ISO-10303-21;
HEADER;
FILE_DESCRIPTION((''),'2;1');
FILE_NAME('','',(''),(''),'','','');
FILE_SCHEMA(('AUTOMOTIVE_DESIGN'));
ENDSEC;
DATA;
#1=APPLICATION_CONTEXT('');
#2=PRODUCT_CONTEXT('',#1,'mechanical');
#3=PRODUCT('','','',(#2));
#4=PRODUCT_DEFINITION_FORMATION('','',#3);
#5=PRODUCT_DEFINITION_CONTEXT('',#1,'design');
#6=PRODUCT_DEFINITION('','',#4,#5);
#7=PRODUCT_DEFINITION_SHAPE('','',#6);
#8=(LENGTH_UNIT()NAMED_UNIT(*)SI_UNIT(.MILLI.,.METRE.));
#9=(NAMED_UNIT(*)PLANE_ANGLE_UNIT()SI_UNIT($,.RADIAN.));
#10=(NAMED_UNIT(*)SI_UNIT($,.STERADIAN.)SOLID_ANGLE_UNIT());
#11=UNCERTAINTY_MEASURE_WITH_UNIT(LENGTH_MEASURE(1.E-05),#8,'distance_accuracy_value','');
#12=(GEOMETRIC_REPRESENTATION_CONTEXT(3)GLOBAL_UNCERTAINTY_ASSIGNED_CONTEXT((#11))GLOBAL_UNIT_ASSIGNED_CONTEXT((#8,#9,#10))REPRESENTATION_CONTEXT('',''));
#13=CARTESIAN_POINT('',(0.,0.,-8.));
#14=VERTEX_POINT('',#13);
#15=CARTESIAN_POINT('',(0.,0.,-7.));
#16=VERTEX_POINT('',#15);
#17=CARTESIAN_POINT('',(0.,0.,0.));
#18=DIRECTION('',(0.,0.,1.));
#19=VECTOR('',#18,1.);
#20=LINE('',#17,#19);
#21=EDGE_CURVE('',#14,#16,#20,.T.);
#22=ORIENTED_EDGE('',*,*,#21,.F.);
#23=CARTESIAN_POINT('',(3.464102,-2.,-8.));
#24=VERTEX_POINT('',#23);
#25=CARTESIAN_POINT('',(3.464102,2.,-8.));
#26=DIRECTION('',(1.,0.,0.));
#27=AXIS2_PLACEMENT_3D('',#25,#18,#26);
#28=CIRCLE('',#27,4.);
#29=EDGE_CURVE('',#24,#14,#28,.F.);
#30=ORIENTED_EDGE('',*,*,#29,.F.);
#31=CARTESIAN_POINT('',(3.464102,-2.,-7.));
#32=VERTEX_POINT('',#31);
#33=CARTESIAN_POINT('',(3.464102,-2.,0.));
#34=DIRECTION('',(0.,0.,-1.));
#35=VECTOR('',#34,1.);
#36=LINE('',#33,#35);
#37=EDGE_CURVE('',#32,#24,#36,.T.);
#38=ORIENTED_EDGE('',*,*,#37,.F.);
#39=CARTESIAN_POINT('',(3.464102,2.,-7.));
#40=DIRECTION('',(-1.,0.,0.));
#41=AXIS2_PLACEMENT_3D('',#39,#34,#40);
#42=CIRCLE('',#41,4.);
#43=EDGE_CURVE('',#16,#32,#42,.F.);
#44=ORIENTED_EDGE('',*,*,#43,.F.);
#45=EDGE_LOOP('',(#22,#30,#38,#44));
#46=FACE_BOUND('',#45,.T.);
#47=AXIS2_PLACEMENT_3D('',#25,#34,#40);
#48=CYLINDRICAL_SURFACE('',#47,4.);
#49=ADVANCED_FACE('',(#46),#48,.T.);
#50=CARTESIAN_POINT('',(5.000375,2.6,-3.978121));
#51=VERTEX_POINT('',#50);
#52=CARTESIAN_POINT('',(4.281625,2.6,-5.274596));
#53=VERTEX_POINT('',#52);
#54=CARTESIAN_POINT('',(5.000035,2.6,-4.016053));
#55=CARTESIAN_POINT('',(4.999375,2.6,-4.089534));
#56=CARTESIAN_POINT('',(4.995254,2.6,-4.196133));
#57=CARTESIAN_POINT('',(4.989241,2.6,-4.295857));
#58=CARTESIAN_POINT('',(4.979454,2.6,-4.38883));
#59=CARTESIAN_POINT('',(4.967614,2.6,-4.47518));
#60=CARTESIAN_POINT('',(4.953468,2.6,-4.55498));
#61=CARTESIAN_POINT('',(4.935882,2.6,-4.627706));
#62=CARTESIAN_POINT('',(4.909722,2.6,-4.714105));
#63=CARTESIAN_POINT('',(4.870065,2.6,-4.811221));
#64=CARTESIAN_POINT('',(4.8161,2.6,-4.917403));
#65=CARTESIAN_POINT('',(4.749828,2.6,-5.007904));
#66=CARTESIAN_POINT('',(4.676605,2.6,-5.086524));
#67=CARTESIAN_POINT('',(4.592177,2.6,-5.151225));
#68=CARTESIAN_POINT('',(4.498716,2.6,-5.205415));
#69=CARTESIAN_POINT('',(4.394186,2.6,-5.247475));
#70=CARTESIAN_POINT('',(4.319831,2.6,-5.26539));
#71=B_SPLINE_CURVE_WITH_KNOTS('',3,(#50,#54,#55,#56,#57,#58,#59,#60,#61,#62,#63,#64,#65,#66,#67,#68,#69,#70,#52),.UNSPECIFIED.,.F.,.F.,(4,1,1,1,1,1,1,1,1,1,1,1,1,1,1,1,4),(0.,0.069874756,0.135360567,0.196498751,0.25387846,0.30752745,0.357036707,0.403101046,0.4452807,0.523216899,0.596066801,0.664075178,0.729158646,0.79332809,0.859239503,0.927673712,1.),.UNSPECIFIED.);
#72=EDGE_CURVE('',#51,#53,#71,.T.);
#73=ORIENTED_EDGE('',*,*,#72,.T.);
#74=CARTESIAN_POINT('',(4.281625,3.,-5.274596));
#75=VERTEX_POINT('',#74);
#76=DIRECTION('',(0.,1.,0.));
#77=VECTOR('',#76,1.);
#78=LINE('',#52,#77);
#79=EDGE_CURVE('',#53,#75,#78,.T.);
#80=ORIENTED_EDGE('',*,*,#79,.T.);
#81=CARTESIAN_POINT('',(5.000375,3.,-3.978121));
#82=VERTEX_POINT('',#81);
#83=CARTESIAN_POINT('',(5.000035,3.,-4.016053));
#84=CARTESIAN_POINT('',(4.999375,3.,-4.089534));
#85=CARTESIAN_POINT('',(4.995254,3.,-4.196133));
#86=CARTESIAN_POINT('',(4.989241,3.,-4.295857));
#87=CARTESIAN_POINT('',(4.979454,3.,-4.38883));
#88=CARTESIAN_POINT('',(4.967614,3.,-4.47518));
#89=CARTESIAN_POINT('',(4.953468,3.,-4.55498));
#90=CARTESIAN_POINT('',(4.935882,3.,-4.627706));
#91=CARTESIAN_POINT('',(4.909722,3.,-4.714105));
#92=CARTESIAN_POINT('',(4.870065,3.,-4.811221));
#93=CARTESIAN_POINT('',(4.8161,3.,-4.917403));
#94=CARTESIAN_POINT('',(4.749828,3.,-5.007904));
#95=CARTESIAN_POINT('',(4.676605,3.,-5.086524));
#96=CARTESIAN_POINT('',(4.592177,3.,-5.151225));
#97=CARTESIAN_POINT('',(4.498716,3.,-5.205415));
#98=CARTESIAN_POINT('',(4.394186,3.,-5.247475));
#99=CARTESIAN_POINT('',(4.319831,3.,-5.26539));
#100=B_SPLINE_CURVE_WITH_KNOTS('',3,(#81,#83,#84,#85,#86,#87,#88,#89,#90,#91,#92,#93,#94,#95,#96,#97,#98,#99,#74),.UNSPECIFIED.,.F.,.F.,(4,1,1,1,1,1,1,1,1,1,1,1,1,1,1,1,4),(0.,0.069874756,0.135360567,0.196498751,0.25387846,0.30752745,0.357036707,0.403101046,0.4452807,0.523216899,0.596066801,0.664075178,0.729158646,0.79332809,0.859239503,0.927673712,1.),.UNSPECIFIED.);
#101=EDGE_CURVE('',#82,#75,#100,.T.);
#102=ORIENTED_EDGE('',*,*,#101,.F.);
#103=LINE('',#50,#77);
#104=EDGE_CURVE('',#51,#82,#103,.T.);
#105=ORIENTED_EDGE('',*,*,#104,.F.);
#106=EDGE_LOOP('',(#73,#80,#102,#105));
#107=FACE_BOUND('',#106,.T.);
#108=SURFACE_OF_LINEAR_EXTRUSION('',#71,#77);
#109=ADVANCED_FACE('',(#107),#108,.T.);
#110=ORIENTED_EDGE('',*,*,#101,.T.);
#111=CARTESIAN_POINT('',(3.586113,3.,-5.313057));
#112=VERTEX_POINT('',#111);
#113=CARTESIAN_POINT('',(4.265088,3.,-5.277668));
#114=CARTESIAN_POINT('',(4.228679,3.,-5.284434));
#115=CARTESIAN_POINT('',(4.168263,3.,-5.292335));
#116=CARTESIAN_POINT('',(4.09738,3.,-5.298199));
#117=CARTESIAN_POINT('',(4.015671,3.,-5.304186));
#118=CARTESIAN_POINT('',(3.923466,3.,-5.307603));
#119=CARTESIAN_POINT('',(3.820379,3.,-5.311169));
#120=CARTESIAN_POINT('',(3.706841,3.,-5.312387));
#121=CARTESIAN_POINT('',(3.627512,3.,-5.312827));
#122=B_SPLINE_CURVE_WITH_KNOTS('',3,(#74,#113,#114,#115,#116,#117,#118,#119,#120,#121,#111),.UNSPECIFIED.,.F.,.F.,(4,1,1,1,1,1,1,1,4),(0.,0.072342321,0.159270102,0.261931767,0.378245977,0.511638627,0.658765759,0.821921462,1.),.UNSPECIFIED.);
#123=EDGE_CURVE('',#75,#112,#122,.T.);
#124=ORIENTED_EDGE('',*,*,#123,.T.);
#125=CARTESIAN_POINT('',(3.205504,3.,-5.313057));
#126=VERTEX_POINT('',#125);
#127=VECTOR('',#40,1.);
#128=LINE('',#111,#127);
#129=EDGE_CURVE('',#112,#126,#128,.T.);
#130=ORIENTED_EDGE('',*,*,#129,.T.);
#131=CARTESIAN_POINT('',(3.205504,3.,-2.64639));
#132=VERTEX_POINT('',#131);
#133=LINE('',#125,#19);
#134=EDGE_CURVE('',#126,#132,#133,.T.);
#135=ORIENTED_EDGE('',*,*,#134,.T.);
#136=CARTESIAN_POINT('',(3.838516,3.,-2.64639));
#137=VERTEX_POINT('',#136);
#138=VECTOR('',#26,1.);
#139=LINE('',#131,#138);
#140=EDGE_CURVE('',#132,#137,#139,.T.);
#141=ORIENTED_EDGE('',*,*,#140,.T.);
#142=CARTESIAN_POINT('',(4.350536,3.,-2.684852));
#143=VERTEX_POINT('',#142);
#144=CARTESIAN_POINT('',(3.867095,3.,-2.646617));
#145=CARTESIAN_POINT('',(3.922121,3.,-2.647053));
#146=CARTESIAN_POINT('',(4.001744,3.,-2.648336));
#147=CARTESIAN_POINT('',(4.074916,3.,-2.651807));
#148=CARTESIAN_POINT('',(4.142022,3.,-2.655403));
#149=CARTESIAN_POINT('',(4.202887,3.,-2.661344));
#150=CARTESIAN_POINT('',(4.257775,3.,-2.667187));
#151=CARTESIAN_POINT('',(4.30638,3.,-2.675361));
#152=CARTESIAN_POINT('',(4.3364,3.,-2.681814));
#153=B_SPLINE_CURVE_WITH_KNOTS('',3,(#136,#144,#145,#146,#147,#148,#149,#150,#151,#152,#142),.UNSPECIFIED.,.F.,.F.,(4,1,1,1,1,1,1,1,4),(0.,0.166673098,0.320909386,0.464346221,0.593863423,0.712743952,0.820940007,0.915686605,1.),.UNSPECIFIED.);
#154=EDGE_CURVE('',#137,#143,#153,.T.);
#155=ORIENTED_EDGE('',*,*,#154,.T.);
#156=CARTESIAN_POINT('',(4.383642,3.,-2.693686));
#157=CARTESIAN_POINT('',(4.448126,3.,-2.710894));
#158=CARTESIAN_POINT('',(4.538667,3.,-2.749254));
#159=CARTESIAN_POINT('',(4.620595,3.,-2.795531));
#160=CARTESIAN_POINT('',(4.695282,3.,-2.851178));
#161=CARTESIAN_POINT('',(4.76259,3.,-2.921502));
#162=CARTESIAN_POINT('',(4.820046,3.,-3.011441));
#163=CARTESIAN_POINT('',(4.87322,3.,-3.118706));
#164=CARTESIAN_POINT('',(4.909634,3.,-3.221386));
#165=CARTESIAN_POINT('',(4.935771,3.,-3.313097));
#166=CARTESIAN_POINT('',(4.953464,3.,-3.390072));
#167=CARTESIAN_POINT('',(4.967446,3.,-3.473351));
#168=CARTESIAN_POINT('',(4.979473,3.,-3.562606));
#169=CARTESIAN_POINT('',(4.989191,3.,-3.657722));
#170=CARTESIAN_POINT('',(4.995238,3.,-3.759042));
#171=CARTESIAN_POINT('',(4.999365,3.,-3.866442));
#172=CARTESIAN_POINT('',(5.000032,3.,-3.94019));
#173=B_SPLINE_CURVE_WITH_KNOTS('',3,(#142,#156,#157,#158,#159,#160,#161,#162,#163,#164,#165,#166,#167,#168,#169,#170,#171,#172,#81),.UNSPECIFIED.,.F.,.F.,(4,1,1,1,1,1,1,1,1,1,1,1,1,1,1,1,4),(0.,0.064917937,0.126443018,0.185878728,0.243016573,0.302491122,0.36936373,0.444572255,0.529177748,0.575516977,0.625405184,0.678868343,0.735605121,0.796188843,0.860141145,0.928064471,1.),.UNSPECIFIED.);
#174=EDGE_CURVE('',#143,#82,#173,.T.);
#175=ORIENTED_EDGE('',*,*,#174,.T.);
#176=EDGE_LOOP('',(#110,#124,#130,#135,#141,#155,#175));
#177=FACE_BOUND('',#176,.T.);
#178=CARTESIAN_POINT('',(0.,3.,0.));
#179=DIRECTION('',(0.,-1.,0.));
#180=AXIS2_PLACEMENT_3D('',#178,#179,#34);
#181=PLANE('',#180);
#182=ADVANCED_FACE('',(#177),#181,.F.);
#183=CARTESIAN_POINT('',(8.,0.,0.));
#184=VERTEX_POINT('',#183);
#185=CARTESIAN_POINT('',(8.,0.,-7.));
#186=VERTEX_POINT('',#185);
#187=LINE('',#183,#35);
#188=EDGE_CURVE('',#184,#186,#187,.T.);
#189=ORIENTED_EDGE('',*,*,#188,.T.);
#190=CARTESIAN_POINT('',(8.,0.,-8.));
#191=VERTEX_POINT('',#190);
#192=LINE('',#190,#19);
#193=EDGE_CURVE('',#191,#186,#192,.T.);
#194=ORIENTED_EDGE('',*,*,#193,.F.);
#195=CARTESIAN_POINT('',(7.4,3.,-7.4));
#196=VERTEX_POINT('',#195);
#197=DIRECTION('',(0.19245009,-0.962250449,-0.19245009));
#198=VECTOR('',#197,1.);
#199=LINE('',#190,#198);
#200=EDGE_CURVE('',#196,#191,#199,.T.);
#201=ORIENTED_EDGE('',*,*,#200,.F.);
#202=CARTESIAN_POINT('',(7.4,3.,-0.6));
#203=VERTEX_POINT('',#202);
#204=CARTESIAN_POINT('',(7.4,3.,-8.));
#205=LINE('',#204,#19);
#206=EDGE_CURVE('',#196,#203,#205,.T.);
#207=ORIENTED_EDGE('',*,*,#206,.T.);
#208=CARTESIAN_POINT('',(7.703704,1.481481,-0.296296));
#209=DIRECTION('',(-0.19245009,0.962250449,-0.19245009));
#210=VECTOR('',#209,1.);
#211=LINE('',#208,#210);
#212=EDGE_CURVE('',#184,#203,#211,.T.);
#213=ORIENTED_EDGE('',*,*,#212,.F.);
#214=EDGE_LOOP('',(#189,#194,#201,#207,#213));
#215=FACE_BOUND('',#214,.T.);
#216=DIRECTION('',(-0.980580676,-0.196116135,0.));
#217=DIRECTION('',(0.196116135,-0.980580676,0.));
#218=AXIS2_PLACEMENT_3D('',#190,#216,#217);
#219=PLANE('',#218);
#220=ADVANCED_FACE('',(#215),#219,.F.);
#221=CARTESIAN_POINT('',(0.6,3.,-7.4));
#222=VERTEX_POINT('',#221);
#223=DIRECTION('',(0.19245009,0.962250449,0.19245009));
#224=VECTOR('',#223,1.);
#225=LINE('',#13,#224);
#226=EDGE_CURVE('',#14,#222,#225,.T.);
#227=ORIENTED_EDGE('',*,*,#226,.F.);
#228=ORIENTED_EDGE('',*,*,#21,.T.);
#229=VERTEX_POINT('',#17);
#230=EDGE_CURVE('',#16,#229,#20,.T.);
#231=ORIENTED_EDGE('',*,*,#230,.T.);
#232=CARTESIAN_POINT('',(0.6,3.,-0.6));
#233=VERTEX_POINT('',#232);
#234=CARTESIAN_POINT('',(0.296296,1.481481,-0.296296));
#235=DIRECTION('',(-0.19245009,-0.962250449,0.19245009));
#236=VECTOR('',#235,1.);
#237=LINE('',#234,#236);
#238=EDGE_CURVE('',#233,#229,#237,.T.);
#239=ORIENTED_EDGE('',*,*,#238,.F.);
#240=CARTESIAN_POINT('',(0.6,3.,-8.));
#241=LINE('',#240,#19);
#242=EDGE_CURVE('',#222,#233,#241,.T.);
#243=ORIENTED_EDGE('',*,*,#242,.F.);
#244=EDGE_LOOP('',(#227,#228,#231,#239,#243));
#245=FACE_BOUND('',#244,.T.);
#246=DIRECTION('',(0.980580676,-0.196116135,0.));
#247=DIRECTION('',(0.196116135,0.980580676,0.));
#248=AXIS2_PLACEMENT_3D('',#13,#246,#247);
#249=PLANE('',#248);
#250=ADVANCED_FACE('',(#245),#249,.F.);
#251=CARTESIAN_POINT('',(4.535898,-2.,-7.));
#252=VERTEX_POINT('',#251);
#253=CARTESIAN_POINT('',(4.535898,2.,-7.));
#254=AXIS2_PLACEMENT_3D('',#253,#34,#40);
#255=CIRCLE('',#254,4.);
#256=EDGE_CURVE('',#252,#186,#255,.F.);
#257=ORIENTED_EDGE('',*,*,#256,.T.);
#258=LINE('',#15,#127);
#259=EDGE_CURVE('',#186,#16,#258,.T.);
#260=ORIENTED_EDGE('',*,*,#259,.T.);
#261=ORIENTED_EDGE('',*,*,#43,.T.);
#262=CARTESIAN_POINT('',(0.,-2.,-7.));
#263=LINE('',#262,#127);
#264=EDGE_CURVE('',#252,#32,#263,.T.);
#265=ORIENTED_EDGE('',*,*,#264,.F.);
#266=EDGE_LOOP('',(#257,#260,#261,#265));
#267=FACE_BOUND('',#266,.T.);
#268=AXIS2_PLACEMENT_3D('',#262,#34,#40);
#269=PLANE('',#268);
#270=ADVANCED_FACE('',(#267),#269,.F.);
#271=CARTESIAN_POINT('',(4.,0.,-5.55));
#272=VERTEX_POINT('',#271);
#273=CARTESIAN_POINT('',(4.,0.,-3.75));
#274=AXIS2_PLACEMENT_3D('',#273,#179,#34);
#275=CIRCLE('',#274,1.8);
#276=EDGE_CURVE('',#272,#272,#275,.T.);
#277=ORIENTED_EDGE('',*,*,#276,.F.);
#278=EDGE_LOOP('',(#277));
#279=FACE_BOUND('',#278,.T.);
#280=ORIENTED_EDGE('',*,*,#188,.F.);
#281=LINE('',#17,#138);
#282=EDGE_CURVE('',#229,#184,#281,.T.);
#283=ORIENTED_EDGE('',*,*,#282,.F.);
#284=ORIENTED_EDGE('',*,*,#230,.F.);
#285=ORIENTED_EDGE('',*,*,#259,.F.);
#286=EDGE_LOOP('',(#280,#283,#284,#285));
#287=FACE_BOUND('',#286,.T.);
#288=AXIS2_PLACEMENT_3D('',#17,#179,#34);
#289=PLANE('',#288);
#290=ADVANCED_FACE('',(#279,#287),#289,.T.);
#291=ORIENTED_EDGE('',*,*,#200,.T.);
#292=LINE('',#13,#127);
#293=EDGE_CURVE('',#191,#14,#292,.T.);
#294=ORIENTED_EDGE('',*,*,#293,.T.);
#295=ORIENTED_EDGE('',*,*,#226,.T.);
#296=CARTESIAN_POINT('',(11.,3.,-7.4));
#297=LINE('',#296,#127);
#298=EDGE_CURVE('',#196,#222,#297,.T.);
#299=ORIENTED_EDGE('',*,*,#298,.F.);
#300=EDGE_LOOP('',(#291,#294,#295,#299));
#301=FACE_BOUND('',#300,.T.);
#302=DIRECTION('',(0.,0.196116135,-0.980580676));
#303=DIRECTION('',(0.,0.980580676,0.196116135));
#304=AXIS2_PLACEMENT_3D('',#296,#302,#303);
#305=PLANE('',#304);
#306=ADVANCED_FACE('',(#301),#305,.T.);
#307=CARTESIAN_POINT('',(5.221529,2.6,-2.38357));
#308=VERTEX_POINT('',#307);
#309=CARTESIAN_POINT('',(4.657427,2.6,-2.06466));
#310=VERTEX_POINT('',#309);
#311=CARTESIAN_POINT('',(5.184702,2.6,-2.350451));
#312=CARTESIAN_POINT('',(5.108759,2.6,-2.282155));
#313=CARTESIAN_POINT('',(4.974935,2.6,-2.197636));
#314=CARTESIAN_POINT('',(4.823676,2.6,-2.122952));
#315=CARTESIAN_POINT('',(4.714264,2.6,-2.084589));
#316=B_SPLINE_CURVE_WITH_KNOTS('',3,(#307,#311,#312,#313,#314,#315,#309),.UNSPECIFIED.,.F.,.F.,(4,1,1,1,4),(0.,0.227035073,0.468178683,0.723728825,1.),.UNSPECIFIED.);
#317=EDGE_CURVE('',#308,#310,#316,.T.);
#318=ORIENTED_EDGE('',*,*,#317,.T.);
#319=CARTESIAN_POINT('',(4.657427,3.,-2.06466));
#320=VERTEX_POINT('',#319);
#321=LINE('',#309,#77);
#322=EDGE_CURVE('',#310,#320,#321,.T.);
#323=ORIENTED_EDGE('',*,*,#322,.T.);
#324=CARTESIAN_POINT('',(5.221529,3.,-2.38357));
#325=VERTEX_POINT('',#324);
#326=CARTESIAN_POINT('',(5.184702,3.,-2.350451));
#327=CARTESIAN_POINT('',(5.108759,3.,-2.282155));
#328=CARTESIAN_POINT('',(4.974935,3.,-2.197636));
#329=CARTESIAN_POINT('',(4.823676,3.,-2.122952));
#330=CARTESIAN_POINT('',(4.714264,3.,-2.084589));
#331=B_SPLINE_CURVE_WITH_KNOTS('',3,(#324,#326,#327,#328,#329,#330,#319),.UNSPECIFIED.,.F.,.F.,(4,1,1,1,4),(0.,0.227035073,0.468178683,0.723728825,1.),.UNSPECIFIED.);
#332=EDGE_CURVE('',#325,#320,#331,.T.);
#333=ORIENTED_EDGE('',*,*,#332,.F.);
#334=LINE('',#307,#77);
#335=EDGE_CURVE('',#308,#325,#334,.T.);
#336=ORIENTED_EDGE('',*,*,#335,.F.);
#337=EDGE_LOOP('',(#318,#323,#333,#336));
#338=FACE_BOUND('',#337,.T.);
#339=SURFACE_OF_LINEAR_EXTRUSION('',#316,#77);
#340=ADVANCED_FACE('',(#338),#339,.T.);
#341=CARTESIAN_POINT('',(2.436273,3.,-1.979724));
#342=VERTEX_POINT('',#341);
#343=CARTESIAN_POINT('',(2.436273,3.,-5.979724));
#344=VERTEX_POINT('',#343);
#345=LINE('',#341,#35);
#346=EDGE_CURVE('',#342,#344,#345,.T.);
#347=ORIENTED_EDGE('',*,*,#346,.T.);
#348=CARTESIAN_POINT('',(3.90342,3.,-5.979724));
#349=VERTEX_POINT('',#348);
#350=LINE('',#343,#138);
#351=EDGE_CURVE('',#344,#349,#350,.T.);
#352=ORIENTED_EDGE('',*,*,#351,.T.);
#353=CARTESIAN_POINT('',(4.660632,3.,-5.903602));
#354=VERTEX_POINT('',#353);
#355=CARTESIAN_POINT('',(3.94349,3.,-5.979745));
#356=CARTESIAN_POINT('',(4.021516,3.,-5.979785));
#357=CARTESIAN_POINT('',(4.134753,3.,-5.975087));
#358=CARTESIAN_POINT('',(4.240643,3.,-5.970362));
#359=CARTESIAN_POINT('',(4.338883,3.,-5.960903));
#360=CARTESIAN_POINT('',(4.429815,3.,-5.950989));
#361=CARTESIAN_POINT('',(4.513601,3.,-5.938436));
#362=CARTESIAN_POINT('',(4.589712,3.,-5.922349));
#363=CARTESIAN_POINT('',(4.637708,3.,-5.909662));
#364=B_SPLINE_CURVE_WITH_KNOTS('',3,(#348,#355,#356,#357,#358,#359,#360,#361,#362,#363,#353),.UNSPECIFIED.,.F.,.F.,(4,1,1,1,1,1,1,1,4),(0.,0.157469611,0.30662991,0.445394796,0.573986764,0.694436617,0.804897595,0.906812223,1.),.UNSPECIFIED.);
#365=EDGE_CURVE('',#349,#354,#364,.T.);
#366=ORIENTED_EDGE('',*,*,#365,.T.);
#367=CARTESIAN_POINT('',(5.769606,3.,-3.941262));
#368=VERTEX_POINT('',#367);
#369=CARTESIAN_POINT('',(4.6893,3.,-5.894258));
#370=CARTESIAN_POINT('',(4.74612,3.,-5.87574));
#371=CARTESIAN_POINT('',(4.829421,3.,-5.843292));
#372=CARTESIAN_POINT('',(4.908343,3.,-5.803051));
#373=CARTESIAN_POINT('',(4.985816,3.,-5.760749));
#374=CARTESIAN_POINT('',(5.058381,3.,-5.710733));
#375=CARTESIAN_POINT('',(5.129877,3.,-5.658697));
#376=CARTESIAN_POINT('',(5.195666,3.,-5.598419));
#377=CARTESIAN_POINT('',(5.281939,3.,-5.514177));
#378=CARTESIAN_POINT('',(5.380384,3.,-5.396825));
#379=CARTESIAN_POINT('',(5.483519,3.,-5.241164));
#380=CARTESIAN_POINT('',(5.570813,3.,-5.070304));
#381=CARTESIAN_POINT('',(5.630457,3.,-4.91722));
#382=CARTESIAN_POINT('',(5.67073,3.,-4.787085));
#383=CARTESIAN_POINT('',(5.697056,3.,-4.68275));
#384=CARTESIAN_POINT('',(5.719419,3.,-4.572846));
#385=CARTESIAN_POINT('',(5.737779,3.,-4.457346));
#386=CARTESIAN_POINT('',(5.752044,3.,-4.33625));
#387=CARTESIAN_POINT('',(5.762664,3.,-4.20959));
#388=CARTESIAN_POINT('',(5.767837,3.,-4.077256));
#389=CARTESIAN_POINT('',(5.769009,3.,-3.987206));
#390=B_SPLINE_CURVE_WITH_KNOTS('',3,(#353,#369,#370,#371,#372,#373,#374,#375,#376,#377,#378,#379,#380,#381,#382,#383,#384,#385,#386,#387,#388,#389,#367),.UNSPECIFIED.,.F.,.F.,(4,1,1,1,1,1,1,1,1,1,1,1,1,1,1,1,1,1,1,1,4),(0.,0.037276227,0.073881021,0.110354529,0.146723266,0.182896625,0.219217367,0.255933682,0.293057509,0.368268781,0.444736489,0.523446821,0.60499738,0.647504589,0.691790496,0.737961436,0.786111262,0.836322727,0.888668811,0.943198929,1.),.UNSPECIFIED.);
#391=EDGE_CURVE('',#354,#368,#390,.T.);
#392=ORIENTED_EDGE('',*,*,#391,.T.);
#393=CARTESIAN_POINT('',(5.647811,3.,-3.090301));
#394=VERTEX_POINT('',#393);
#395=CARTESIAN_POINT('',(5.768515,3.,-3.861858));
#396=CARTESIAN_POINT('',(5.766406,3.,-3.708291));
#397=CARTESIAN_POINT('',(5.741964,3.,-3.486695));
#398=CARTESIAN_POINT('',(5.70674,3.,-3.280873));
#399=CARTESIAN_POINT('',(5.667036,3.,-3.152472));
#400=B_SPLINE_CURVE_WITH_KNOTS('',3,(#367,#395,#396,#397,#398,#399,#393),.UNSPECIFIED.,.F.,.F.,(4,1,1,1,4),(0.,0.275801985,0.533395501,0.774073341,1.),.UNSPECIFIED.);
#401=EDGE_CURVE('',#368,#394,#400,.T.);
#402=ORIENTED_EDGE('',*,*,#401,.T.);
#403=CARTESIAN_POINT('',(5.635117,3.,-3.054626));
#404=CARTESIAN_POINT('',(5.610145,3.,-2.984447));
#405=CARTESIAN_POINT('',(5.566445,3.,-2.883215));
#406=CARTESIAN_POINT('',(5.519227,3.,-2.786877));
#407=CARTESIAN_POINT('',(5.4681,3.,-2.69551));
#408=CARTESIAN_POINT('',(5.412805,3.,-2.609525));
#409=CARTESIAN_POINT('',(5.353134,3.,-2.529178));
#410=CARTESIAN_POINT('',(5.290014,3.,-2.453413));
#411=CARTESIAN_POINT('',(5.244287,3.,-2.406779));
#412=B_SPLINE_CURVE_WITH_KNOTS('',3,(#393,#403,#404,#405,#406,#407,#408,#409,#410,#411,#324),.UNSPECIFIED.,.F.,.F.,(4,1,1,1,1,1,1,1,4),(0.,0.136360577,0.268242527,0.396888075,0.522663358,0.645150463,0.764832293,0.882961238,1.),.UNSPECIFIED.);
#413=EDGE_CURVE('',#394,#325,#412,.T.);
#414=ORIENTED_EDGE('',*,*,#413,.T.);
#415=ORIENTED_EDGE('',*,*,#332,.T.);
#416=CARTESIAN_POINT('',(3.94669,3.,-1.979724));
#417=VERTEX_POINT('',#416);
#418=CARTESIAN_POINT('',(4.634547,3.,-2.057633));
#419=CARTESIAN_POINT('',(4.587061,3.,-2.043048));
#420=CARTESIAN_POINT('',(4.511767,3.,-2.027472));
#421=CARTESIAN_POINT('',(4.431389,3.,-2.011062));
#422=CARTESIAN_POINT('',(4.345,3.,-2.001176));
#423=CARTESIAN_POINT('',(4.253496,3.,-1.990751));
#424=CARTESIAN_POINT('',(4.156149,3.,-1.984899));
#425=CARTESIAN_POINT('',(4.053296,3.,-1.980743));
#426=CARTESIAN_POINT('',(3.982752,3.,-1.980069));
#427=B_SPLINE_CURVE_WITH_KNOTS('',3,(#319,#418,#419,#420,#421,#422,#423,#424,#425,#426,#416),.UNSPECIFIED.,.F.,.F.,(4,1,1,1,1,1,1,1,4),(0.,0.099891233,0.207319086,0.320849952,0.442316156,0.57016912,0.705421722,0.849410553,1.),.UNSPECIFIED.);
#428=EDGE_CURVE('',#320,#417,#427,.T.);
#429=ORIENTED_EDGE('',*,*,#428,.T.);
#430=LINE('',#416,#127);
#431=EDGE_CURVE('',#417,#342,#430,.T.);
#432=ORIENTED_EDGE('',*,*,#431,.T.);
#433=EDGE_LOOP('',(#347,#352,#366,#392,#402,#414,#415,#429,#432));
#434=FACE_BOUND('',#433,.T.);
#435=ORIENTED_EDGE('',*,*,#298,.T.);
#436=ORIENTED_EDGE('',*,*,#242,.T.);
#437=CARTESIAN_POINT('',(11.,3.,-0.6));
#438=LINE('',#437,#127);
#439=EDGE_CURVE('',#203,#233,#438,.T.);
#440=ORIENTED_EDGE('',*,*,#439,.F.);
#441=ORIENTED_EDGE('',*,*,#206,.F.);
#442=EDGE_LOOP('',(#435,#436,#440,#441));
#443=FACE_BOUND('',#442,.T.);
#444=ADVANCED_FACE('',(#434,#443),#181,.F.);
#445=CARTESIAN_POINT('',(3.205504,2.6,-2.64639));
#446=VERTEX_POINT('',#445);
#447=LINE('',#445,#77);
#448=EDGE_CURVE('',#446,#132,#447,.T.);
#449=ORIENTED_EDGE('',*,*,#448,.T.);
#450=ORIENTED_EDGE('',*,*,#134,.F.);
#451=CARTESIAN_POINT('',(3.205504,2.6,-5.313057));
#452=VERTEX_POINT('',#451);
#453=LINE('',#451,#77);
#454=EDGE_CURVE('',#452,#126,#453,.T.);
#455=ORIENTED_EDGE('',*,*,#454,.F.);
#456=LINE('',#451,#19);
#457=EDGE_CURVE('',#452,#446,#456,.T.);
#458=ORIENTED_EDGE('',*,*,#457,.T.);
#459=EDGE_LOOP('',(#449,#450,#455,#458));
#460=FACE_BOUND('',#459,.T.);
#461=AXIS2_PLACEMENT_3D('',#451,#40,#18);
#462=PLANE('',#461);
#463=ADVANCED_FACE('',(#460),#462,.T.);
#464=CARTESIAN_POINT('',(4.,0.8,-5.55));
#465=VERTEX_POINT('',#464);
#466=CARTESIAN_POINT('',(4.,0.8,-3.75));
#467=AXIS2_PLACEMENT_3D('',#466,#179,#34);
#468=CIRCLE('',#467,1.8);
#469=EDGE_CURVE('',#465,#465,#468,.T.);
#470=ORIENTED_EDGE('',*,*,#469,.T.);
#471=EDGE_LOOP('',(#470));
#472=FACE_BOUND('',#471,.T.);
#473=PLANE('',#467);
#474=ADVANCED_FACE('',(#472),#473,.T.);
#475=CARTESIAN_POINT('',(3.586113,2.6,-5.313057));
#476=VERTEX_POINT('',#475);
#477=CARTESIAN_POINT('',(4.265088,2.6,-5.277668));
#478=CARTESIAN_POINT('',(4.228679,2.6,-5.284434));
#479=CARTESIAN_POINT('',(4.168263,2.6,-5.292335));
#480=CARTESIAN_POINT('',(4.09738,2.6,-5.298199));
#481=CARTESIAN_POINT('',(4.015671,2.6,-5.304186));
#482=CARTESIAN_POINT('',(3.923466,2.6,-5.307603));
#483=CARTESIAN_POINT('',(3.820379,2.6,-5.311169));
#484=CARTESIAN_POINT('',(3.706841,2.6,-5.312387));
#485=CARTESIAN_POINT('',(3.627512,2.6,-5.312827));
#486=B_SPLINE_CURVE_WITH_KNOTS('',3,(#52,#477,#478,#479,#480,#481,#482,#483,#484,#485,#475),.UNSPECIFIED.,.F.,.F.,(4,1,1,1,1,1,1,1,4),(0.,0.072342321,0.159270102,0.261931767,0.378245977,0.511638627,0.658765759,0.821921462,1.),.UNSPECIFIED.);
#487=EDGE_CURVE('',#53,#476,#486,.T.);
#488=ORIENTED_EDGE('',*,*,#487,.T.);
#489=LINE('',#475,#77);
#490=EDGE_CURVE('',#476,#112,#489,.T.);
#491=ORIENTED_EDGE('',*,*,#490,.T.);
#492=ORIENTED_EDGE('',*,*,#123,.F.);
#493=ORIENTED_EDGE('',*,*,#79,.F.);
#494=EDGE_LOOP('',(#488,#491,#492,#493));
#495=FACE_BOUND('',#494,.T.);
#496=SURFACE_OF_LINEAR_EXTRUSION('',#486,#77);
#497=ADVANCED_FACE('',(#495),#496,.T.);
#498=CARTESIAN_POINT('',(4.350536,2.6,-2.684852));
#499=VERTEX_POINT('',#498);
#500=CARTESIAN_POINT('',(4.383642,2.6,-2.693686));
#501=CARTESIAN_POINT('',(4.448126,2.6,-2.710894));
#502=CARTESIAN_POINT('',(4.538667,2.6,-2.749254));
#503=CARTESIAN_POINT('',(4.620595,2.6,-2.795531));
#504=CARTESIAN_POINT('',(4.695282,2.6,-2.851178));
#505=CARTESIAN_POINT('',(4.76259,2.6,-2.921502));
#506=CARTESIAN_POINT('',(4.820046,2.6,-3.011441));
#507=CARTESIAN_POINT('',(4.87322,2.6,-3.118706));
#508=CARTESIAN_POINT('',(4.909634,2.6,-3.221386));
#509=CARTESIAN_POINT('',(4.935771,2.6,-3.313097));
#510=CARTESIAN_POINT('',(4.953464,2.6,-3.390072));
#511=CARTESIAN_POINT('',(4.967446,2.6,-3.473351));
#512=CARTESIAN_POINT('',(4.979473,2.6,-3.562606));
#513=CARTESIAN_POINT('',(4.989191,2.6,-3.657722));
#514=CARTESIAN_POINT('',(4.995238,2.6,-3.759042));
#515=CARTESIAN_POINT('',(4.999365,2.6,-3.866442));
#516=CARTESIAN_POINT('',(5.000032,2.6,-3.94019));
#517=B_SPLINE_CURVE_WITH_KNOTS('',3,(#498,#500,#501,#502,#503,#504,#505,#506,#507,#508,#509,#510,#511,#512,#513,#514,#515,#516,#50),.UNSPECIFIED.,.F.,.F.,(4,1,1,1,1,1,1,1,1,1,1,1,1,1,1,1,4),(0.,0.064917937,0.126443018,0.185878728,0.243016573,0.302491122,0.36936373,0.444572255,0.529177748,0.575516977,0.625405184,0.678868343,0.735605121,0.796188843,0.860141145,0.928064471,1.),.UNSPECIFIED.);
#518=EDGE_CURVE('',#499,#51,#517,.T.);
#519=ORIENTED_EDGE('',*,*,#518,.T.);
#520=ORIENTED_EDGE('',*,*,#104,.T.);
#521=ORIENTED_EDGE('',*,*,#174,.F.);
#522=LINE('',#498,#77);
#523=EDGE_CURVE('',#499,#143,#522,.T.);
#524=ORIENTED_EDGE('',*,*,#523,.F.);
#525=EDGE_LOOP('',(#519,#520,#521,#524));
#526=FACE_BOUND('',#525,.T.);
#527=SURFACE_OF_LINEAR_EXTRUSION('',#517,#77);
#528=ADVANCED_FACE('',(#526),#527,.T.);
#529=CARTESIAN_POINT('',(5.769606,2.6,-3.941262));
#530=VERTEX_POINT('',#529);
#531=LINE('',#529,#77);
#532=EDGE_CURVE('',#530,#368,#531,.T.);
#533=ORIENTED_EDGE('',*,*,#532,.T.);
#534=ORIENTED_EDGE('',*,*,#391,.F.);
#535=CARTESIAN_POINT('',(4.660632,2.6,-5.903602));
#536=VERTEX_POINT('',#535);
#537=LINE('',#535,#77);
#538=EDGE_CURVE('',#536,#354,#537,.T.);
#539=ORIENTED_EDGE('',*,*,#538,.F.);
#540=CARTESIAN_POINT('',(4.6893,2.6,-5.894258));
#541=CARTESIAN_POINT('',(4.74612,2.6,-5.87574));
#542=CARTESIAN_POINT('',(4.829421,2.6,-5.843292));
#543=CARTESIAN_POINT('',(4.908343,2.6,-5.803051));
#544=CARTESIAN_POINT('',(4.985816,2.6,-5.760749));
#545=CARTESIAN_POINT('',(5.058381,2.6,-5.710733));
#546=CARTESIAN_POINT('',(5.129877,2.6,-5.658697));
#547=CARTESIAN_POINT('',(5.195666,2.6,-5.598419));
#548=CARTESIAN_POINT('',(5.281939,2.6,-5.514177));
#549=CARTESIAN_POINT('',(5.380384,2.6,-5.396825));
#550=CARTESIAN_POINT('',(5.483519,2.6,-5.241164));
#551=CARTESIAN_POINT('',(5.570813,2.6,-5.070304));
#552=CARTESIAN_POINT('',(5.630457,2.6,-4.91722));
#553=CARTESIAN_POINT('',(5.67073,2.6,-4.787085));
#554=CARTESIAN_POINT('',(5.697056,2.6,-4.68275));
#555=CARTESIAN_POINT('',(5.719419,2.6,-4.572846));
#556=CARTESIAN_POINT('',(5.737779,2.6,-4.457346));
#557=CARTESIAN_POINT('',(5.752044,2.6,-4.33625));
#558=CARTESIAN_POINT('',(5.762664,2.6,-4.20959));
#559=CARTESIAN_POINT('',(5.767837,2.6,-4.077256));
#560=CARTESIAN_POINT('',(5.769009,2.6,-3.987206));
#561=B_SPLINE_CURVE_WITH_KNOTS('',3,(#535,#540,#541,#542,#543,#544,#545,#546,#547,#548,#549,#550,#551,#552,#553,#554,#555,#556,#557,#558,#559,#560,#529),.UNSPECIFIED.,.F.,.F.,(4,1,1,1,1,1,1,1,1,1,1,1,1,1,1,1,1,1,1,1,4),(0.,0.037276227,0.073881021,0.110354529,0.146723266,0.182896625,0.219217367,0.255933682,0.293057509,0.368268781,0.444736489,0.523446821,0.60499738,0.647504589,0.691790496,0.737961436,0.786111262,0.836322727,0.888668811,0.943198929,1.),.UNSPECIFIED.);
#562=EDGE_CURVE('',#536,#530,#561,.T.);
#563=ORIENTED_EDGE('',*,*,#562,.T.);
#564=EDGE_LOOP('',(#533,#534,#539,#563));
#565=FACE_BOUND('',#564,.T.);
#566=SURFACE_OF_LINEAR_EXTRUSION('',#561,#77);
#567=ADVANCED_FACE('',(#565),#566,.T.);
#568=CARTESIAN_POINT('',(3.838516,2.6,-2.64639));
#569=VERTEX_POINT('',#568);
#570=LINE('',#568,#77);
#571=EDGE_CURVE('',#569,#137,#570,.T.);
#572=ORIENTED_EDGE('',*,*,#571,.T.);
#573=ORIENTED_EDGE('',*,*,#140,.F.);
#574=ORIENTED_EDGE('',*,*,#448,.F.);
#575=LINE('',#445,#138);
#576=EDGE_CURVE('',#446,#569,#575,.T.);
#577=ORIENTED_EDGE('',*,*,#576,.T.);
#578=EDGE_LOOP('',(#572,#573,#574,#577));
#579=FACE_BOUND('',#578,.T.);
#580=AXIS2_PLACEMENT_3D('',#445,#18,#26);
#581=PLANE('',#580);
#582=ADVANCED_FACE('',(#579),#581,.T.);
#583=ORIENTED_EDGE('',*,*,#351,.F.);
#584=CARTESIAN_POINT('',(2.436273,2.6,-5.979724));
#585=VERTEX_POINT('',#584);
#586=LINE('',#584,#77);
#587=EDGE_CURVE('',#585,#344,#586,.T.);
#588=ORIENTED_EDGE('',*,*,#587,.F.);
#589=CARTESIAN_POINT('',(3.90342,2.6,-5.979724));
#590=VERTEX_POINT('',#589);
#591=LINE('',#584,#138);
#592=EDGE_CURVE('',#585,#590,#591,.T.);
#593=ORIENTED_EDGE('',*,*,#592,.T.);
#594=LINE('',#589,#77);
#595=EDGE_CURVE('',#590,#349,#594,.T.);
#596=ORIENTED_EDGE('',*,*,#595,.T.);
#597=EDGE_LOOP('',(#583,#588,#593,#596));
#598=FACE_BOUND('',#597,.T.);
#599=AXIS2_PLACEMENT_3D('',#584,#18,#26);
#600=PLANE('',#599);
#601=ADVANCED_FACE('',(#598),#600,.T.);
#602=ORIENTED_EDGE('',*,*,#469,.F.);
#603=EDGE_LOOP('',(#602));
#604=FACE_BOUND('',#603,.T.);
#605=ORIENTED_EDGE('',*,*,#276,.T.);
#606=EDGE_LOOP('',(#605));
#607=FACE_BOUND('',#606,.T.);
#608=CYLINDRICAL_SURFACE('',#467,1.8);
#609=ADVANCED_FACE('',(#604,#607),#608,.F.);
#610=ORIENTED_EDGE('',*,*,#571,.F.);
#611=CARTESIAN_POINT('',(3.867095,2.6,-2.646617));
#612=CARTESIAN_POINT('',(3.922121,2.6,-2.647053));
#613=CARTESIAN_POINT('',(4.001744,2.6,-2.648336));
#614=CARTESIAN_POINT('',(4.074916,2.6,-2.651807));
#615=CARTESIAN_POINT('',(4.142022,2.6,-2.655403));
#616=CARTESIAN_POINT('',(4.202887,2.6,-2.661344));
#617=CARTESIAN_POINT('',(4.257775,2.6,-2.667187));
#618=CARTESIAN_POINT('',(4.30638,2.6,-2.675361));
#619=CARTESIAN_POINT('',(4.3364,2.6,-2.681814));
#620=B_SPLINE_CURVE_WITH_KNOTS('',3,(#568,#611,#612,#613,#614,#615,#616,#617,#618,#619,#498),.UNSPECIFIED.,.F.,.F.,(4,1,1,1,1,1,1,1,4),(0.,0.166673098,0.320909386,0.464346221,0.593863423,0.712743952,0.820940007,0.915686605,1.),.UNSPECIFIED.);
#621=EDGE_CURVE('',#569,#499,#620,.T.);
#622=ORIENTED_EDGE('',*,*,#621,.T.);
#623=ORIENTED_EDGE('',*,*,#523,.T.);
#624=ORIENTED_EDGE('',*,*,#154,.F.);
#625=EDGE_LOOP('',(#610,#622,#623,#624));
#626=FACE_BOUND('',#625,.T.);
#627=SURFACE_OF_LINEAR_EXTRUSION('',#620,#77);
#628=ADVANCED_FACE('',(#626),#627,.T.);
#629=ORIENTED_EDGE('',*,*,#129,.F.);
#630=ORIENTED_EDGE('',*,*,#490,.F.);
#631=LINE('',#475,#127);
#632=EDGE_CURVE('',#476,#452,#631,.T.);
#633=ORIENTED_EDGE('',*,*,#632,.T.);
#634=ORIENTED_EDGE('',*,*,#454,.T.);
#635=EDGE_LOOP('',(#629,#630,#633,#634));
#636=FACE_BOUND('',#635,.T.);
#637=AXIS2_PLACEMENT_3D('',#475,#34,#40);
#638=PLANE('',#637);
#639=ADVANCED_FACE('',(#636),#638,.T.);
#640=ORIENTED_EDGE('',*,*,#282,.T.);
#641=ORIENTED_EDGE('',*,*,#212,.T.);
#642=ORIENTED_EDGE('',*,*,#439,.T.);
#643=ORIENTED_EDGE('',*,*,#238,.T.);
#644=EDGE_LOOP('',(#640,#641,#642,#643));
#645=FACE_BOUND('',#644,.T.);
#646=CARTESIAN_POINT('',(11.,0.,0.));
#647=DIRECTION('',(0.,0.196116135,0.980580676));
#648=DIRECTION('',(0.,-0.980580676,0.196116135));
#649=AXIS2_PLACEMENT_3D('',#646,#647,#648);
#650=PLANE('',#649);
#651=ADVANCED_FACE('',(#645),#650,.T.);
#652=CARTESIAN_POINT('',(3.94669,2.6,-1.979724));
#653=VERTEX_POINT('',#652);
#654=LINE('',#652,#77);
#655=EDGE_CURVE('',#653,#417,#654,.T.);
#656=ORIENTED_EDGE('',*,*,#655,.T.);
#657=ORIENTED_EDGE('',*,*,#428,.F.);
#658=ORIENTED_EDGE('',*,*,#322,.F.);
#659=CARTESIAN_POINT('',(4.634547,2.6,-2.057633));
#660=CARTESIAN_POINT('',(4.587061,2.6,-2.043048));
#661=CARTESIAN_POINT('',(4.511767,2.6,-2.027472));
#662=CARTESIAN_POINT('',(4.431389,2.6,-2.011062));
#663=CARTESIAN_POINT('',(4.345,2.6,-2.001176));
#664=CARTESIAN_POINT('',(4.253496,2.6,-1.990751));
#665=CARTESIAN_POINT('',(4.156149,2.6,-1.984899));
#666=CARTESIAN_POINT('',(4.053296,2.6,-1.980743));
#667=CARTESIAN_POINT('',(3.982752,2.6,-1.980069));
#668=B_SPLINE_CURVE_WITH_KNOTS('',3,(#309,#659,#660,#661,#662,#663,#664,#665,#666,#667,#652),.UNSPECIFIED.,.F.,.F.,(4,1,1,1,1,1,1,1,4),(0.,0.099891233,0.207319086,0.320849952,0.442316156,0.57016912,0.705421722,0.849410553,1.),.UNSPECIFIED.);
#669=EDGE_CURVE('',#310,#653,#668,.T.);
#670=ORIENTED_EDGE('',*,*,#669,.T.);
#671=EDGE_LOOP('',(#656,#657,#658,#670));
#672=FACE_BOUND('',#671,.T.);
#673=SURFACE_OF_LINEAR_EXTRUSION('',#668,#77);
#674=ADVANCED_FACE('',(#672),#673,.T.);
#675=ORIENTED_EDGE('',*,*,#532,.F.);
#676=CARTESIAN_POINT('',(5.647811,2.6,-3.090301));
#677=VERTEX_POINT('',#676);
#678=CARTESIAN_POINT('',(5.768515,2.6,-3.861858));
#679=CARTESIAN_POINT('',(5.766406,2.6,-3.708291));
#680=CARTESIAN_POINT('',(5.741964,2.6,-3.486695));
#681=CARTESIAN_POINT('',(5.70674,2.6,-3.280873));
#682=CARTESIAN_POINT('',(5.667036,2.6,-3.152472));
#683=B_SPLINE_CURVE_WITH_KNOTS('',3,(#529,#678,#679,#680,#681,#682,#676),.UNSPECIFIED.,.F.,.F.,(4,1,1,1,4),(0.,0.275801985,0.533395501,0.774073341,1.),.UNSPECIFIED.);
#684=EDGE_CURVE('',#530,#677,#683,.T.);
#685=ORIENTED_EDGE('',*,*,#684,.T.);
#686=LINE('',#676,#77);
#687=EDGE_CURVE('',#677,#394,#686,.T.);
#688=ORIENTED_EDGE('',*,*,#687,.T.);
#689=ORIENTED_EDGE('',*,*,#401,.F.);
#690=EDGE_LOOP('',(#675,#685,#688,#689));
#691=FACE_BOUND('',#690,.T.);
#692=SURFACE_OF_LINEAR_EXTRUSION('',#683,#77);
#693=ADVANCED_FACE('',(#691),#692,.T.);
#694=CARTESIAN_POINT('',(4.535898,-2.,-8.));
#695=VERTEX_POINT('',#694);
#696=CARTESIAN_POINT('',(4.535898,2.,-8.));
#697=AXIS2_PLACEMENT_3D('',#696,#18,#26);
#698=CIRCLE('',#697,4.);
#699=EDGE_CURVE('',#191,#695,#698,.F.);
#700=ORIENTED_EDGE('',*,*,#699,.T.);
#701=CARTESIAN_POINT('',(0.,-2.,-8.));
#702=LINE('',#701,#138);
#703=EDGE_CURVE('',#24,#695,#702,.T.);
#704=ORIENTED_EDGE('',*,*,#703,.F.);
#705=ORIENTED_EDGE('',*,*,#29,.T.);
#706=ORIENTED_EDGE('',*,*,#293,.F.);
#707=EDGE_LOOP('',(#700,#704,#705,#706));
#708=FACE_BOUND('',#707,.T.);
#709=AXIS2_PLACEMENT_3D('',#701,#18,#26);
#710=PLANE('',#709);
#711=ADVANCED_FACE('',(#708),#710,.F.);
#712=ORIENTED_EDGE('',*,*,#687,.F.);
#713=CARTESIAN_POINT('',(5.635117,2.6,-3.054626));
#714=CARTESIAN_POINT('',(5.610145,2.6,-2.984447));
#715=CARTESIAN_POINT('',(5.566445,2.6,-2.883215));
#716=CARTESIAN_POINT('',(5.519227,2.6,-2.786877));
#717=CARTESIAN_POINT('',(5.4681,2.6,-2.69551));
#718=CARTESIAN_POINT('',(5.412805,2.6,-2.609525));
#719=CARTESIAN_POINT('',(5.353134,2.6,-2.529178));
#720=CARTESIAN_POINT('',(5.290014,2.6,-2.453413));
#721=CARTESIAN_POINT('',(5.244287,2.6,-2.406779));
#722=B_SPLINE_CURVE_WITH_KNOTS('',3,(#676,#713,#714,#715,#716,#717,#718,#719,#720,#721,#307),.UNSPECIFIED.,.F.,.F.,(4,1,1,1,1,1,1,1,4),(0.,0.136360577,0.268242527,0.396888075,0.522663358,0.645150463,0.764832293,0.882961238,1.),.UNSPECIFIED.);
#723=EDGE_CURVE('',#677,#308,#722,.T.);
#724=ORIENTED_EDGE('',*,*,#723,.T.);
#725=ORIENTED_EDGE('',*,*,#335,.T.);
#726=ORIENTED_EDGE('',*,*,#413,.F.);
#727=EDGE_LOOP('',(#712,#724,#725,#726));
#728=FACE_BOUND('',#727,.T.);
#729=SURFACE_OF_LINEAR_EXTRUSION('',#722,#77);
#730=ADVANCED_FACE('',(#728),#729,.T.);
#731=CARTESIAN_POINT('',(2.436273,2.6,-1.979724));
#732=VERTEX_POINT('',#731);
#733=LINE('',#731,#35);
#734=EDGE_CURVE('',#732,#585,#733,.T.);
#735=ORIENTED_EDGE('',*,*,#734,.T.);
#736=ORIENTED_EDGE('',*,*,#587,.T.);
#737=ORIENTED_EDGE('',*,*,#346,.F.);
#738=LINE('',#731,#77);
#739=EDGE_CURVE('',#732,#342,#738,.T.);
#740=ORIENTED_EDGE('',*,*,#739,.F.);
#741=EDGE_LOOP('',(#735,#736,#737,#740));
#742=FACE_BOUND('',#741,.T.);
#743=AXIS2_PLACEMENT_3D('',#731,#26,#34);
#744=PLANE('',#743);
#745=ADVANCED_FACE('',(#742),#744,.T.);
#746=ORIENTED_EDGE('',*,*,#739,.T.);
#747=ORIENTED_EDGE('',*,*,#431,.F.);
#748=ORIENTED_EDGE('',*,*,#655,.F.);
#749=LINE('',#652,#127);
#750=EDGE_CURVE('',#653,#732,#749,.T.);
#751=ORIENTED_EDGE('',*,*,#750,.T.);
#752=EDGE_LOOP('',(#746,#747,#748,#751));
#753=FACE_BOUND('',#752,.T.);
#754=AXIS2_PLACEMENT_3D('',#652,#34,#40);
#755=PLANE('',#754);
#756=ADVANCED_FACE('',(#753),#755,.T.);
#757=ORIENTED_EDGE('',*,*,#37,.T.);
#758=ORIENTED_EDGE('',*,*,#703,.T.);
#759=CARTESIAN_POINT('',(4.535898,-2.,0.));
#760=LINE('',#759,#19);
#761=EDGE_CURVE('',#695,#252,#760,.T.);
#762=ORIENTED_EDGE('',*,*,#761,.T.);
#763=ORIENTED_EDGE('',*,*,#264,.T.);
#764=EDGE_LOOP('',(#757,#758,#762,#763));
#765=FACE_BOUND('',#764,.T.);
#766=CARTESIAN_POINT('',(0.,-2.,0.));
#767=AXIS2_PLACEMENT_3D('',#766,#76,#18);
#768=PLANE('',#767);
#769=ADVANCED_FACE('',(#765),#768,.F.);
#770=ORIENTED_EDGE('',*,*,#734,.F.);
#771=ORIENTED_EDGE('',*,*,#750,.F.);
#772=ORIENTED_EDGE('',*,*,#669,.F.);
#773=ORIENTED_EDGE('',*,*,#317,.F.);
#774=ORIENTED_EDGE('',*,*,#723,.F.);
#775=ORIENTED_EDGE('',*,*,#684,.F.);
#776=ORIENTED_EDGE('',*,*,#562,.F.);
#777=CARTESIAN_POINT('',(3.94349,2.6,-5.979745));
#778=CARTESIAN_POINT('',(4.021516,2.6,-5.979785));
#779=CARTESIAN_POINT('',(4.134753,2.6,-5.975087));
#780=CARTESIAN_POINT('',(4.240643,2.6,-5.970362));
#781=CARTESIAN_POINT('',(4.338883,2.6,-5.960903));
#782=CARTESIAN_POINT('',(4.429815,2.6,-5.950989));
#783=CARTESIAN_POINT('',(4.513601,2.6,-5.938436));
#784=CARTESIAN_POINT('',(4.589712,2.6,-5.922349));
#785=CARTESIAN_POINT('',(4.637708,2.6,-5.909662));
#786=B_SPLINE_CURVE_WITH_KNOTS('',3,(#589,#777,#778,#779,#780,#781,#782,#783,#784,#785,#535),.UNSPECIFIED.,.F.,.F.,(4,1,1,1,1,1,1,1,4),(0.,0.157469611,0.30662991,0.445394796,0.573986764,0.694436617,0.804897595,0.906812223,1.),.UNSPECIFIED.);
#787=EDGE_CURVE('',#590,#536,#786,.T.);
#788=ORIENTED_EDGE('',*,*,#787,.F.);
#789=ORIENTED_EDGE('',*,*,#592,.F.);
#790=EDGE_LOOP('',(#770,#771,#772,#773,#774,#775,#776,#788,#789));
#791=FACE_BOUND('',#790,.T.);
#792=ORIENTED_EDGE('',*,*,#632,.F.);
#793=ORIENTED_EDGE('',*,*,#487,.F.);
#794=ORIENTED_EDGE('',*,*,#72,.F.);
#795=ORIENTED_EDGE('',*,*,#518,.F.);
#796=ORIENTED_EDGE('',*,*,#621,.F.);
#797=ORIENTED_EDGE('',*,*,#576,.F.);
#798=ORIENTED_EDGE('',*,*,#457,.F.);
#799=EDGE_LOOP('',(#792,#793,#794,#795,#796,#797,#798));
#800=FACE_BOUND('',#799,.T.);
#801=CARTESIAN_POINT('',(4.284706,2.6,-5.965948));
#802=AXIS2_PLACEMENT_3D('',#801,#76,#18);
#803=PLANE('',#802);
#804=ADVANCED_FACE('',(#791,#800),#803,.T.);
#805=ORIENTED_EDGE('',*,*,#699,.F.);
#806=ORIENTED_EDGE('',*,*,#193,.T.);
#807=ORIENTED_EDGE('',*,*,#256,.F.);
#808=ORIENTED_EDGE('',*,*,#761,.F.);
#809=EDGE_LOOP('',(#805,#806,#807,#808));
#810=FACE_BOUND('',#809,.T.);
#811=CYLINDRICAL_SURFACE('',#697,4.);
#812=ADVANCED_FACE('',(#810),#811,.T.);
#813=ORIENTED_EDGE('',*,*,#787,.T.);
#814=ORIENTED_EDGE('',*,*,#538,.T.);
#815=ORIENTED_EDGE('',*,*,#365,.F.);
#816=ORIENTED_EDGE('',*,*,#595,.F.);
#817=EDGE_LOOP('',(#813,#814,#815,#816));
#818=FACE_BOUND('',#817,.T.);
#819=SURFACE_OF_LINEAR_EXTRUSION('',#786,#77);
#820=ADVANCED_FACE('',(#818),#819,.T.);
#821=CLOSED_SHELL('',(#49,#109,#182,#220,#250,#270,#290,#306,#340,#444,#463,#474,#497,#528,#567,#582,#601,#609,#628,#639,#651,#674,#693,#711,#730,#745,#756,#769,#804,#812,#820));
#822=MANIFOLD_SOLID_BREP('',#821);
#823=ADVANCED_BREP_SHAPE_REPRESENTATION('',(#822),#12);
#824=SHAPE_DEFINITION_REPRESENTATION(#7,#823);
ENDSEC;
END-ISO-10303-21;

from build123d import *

# Parameters (mm, degrees)
SKETCH1_W               = 8
SKETCH1_H               = 8
BOSS_EXTRUDE1_DEPTH     = 3
CUT_EXTRUDE1_DEPTH      = 12.704699911
CUT_EXTRUDE1_DEPTH_BACK = 12.704699911
CUT_EXTRUDE2_DEPTH      = 11
SKETCH4_R               = 1.8
CUT_EXTRUDE3_DEPTH      = 0.8
SKETCH5_W               = 8
SKETCH5_H               = 1
BOSS_EXTRUDE2_DEPTH     = 2
FILLET1_R               = 4
CUT_EXTRUDE4_DEPTH      = 0.4


with BuildPart() as part:
    # Sketch1 → Boss-Extrude1 (new body)
    with BuildSketch(Plane(origin=(0, 0, 0), x_dir=(1, 0, 0), z_dir=(0, 1, 0))):
        with Locations((4, 4)):
            Rectangle(SKETCH1_W, SKETCH1_H)
    extrude(amount=BOSS_EXTRUDE1_DEPTH)

    # Sketch2 → Cut-Extrude1 (cut, two sides: drawn at the far end of the back side and taken through both)
    with BuildSketch(Plane.XY.offset(-CUT_EXTRUDE1_DEPTH_BACK)):
        Polygon((0, 0), (0.6, 3), (0, 3), align=None)
        Polygon((8, 0), (7.4, 3), (8, 3), align=None)
    extrude(amount=CUT_EXTRUDE1_DEPTH + CUT_EXTRUDE1_DEPTH_BACK, mode=Mode.SUBTRACT)

    # Sketch3 → Cut-Extrude2 (cut)
    with BuildSketch(Plane(origin=(0, 0, 0), x_dir=(0, 0, -1), z_dir=(1, 0, 0))):
        Polygon((0, 0), (0.6, 3), (0, 3), align=None)
        Polygon((8, 3), (7.4, 3), (8, 0), align=None)
    extrude(amount=CUT_EXTRUDE2_DEPTH, mode=Mode.SUBTRACT)

    # Sketch4 → Cut-Extrude3 (cut)
    with BuildSketch(Plane.XZ):
        with Locations(Location((4, -3.75, 0), (0, 0, 270))):
            Circle(SKETCH4_R)
    extrude(amount=-CUT_EXTRUDE3_DEPTH, mode=Mode.SUBTRACT)

    # Sketch5 → Boss-Extrude2 (add)
    with BuildSketch(Plane.XZ):
        with Locations((4, -7.5)):
            Rectangle(SKETCH5_W, SKETCH5_H)
    extrude(amount=BOSS_EXTRUDE2_DEPTH)

    # Fillet1
    # the kernel refuses this fillet: 4 mm, written as the material it takes off along each edge
    with BuildSketch(Plane(origin=(8, -2, -16.660254038), x_dir=(0, 1, 0), z_dir=(0, 0, 1)), Plane(origin=(0, -2, 1.660254038), x_dir=(0, 1, 0), z_dir=(0, 0, -1))) as fillet1_piece_1:
        with BuildLine():
            CenterArc((4, 3.464101615), FILLET1_R, 180, 60)
            Line((0, 3.464101615), (-0.08, 3.464101615))
            Line((-0.08, 3.464101615), (-0.08, 0))
            Line((-0.08, 0), (0, -0.08))
            ThreePointArc((0, -0.08), (1, -0.08), (1.96, -0.069282032))
            Line((1.96, -0.069282032), (2, 0))
        make_face()
    extrude(amount=18.320508076, mode=Mode.SUBTRACT)

    # Sketch6 → Cut-Extrude4 (cut)
    with BuildSketch(Plane(origin=(0, 3, 0), x_dir=(1, 0, 0), z_dir=(0, 1, 0))):
        with BuildLine():
            Line((2.436272881, 5.979723732), (3.903420317, 5.979723732))
            add(Edge.make_bspline(
                [(3.903420317, 5.979723732), (3.943490496, 5.979744505), (4.021516441, 5.979784954), (4.134752515, 5.975087302), (4.240642802, 5.970362082), (4.338883372, 5.960903224), (4.429815049, 5.950988663), (4.51360101, 5.938436084), (4.589711972, 5.922348579), (4.637707501, 5.909661658), (4.660631856, 5.903601937)],
                knots=[0, 0, 0, 0, 1.259756885, 2.453039283, 3.563158368, 4.591894114, 5.55549294, 6.43918076, 7.254497783, 8, 8, 8, 8], degree=3))
            add(Edge.make_bspline(
                [(4.660631856, 5.903601937), (4.689300162, 5.894258489), (4.74612039, 5.87573989), (4.829420592, 5.843292221), (4.908343197, 5.803050568), (4.985816138, 5.760749105), (5.058380803, 5.710732544), (5.129877456, 5.658697008), (5.195666079, 5.598419283), (5.281939397, 5.514177193), (5.380383811, 5.396825298), (5.483519335, 5.241163905), (5.570813292, 5.070304112), (5.630456537, 4.917219685), (5.670729972, 4.787084992), (5.697056277, 4.682749965), (5.719418871, 4.572846322), (5.737778631, 4.457346355), (5.752043635, 4.336250048), (5.762664083, 4.209589679), (5.767837312, 4.07725583), (5.769008616, 3.987205692), (5.769606215, 3.941262194)],
                knots=[0, 0, 0, 0, 0.745524535, 1.477620414, 2.207090574, 2.934465325, 3.657932502, 4.384347339, 5.118673636, 5.861150177, 7.365375624, 8.894729774, 10.468936425, 12.099947606, 12.950091786, 13.83580991, 14.759228729, 15.722225242, 16.726454549, 17.773376212, 18.863978586, 20, 20, 20, 20], degree=3))
            add(Edge.make_bspline(
                [(5.769606215, 3.941262194), (5.768515323, 3.861857727), (5.766405561, 3.708291084), (5.741963835, 3.486695058), (5.70674022, 3.280872561), (5.667035899, 3.152471539), (5.647811343, 3.090300655)],
                knots=[0, 0, 0, 0, 1.103207939, 2.133582005, 3.096293362, 4, 4, 4, 4], degree=3))
            add(Edge.make_bspline(
                [(5.647811343, 3.090300655), (5.635116766, 3.054625647), (5.610144552, 2.98444734), (5.566445051, 2.883214788), (5.519227431, 2.786877042), (5.468100041, 2.695510004), (5.412804571, 2.609524646), (5.353134197, 2.529178156), (5.290013855, 2.453412746), (5.244286819, 2.406778778), (5.221529292, 2.383569886)],
                knots=[0, 0, 0, 0, 1.090884612, 2.145940218, 3.175104604, 4.181306866, 5.161203701, 6.118658341, 7.063689906, 8, 8, 8, 8], degree=3))
            add(Edge.make_bspline(
                [(5.221529292, 2.383569886), (5.184702113, 2.350450915), (5.108759222, 2.282154876), (4.974934842, 2.197635799), (4.823675662, 2.122952418), (4.714264019, 2.084588805), (4.657426727, 2.06465963)],
                knots=[0, 0, 0, 0, 0.908140292, 1.872714733, 2.8949153, 4, 4, 4, 4], degree=3))
            add(Edge.make_bspline(
                [(4.657426727, 2.06465963), (4.634546833, 2.057632533), (4.587060796, 2.043048157), (4.511767003, 2.027471741), (4.431388989, 2.011061834), (4.344999886, 2.001176252), (4.253496453, 1.990751469), (4.156149493, 1.984898536), (4.053296456, 1.980743294), (3.98275208, 1.980068625), (3.946689548, 1.979723732)],
                knots=[0, 0, 0, 0, 0.799129865, 1.658552685, 2.566799617, 3.538529252, 4.561352959, 5.643373779, 6.795284424, 8, 8, 8, 8], degree=3))
            Line((3.946689548, 1.979723732), (2.436272881, 1.979723732))
            Line((2.436272881, 1.979723732), (2.436272881, 5.979723732))
        make_face()
        with BuildLine():
            Line((3.205503651, 5.313057065), (3.205503651, 2.646390399))
            Line((3.205503651, 2.646390399), (3.838516471, 2.646390399))
            add(Edge.make_bspline(
                [(3.838516471, 2.646390399), (3.86709534, 2.646617049), (3.922120581, 2.647053436), (4.001743514, 2.648335709), (4.07491632, 2.651807064), (4.142022322, 2.655402822), (4.202886818, 2.661343643), (4.257774639, 2.667186667), (4.306380252, 2.675360935), (4.336400272, 2.681813595), (4.350535702, 2.684851937)],
                knots=[0, 0, 0, 0, 1.333384787, 2.567275092, 3.714769766, 4.750907381, 5.701951617, 6.567520054, 7.325492842, 8, 8, 8, 8], degree=3))
            add(Edge.make_bspline(
                [(4.350535702, 2.684851937), (4.38364248, 2.693686468), (4.44812575, 2.710893803), (4.538666782, 2.749253907), (4.62059475, 2.795531175), (4.695281698, 2.8511776), (4.762590099, 2.92150181), (4.820046047, 3.011440962), (4.873220012, 3.118706088), (4.909633556, 3.221385639), (4.935771128, 3.313096613), (4.95346412, 3.390071897), (4.967446413, 3.47335137), (4.979473009, 3.562606359), (4.989190784, 3.657722085), (4.995237644, 3.759042029), (4.999364663, 3.866442163), (5.000032135, 3.940189623), (5.000375445, 3.978121168)],
                knots=[0, 0, 0, 0, 1.038686998, 2.023088296, 2.974059649, 3.888265163, 4.839857954, 5.909819677, 7.113156087, 8.466843969, 9.20827164, 10.006482943, 10.861893492, 11.769681931, 12.739021491, 13.762258324, 14.849031541, 16, 16, 16, 16], degree=3))
            add(Edge.make_bspline(
                [(5.000375445, 3.978121168), (5.000034775, 4.01605283), (4.999374834, 4.089533605), (4.995254144, 4.196132914), (4.989241251, 4.29585735), (4.979454269, 4.38883019), (4.967614104, 4.475179926), (4.953468032, 4.554979633), (4.935881696, 4.627705609), (4.909721893, 4.71410541), (4.870064977, 4.811221472), (4.816099655, 4.917402921), (4.749828382, 5.00790436), (4.676605078, 5.08652444), (4.592177372, 5.151224792), (4.498716105, 5.205415106), (4.394186359, 5.247475499), (4.319831067, 5.2653904), (4.281625445, 5.274595527)],
                knots=[0, 0, 0, 0, 1.117996097, 2.165769068, 3.143980016, 4.062055362, 4.920439205, 5.712587309, 6.449616741, 7.124491204, 8.371470382, 9.537068822, 10.625202851, 11.666538334, 12.693249444, 13.747832046, 14.842779399, 16, 16, 16, 16], degree=3))
            add(Edge.make_bspline(
                [(4.281625445, 5.274595527), (4.265088191, 5.27766838), (4.228679487, 5.284433627), (4.168262747, 5.292335475), (4.097380449, 5.298199321), (4.015671249, 5.304185793), (3.923465993, 5.307602683), (3.820378875, 5.311168762), (3.706841263, 5.312386928), (3.627511913, 5.312827267), (3.586112625, 5.313057065)],
                knots=[0, 0, 0, 0, 0.578738571, 1.274160813, 2.095454135, 3.025967819, 4.093109015, 5.270126069, 6.575371698, 8, 8, 8, 8], degree=3))
            Line((3.586112625, 5.313057065), (3.205503651, 5.313057065))
        make_face(mode=Mode.SUBTRACT)
    extrude(amount=-CUT_EXTRUDE4_DEPTH, mode=Mode.SUBTRACT)


solid = part.part
